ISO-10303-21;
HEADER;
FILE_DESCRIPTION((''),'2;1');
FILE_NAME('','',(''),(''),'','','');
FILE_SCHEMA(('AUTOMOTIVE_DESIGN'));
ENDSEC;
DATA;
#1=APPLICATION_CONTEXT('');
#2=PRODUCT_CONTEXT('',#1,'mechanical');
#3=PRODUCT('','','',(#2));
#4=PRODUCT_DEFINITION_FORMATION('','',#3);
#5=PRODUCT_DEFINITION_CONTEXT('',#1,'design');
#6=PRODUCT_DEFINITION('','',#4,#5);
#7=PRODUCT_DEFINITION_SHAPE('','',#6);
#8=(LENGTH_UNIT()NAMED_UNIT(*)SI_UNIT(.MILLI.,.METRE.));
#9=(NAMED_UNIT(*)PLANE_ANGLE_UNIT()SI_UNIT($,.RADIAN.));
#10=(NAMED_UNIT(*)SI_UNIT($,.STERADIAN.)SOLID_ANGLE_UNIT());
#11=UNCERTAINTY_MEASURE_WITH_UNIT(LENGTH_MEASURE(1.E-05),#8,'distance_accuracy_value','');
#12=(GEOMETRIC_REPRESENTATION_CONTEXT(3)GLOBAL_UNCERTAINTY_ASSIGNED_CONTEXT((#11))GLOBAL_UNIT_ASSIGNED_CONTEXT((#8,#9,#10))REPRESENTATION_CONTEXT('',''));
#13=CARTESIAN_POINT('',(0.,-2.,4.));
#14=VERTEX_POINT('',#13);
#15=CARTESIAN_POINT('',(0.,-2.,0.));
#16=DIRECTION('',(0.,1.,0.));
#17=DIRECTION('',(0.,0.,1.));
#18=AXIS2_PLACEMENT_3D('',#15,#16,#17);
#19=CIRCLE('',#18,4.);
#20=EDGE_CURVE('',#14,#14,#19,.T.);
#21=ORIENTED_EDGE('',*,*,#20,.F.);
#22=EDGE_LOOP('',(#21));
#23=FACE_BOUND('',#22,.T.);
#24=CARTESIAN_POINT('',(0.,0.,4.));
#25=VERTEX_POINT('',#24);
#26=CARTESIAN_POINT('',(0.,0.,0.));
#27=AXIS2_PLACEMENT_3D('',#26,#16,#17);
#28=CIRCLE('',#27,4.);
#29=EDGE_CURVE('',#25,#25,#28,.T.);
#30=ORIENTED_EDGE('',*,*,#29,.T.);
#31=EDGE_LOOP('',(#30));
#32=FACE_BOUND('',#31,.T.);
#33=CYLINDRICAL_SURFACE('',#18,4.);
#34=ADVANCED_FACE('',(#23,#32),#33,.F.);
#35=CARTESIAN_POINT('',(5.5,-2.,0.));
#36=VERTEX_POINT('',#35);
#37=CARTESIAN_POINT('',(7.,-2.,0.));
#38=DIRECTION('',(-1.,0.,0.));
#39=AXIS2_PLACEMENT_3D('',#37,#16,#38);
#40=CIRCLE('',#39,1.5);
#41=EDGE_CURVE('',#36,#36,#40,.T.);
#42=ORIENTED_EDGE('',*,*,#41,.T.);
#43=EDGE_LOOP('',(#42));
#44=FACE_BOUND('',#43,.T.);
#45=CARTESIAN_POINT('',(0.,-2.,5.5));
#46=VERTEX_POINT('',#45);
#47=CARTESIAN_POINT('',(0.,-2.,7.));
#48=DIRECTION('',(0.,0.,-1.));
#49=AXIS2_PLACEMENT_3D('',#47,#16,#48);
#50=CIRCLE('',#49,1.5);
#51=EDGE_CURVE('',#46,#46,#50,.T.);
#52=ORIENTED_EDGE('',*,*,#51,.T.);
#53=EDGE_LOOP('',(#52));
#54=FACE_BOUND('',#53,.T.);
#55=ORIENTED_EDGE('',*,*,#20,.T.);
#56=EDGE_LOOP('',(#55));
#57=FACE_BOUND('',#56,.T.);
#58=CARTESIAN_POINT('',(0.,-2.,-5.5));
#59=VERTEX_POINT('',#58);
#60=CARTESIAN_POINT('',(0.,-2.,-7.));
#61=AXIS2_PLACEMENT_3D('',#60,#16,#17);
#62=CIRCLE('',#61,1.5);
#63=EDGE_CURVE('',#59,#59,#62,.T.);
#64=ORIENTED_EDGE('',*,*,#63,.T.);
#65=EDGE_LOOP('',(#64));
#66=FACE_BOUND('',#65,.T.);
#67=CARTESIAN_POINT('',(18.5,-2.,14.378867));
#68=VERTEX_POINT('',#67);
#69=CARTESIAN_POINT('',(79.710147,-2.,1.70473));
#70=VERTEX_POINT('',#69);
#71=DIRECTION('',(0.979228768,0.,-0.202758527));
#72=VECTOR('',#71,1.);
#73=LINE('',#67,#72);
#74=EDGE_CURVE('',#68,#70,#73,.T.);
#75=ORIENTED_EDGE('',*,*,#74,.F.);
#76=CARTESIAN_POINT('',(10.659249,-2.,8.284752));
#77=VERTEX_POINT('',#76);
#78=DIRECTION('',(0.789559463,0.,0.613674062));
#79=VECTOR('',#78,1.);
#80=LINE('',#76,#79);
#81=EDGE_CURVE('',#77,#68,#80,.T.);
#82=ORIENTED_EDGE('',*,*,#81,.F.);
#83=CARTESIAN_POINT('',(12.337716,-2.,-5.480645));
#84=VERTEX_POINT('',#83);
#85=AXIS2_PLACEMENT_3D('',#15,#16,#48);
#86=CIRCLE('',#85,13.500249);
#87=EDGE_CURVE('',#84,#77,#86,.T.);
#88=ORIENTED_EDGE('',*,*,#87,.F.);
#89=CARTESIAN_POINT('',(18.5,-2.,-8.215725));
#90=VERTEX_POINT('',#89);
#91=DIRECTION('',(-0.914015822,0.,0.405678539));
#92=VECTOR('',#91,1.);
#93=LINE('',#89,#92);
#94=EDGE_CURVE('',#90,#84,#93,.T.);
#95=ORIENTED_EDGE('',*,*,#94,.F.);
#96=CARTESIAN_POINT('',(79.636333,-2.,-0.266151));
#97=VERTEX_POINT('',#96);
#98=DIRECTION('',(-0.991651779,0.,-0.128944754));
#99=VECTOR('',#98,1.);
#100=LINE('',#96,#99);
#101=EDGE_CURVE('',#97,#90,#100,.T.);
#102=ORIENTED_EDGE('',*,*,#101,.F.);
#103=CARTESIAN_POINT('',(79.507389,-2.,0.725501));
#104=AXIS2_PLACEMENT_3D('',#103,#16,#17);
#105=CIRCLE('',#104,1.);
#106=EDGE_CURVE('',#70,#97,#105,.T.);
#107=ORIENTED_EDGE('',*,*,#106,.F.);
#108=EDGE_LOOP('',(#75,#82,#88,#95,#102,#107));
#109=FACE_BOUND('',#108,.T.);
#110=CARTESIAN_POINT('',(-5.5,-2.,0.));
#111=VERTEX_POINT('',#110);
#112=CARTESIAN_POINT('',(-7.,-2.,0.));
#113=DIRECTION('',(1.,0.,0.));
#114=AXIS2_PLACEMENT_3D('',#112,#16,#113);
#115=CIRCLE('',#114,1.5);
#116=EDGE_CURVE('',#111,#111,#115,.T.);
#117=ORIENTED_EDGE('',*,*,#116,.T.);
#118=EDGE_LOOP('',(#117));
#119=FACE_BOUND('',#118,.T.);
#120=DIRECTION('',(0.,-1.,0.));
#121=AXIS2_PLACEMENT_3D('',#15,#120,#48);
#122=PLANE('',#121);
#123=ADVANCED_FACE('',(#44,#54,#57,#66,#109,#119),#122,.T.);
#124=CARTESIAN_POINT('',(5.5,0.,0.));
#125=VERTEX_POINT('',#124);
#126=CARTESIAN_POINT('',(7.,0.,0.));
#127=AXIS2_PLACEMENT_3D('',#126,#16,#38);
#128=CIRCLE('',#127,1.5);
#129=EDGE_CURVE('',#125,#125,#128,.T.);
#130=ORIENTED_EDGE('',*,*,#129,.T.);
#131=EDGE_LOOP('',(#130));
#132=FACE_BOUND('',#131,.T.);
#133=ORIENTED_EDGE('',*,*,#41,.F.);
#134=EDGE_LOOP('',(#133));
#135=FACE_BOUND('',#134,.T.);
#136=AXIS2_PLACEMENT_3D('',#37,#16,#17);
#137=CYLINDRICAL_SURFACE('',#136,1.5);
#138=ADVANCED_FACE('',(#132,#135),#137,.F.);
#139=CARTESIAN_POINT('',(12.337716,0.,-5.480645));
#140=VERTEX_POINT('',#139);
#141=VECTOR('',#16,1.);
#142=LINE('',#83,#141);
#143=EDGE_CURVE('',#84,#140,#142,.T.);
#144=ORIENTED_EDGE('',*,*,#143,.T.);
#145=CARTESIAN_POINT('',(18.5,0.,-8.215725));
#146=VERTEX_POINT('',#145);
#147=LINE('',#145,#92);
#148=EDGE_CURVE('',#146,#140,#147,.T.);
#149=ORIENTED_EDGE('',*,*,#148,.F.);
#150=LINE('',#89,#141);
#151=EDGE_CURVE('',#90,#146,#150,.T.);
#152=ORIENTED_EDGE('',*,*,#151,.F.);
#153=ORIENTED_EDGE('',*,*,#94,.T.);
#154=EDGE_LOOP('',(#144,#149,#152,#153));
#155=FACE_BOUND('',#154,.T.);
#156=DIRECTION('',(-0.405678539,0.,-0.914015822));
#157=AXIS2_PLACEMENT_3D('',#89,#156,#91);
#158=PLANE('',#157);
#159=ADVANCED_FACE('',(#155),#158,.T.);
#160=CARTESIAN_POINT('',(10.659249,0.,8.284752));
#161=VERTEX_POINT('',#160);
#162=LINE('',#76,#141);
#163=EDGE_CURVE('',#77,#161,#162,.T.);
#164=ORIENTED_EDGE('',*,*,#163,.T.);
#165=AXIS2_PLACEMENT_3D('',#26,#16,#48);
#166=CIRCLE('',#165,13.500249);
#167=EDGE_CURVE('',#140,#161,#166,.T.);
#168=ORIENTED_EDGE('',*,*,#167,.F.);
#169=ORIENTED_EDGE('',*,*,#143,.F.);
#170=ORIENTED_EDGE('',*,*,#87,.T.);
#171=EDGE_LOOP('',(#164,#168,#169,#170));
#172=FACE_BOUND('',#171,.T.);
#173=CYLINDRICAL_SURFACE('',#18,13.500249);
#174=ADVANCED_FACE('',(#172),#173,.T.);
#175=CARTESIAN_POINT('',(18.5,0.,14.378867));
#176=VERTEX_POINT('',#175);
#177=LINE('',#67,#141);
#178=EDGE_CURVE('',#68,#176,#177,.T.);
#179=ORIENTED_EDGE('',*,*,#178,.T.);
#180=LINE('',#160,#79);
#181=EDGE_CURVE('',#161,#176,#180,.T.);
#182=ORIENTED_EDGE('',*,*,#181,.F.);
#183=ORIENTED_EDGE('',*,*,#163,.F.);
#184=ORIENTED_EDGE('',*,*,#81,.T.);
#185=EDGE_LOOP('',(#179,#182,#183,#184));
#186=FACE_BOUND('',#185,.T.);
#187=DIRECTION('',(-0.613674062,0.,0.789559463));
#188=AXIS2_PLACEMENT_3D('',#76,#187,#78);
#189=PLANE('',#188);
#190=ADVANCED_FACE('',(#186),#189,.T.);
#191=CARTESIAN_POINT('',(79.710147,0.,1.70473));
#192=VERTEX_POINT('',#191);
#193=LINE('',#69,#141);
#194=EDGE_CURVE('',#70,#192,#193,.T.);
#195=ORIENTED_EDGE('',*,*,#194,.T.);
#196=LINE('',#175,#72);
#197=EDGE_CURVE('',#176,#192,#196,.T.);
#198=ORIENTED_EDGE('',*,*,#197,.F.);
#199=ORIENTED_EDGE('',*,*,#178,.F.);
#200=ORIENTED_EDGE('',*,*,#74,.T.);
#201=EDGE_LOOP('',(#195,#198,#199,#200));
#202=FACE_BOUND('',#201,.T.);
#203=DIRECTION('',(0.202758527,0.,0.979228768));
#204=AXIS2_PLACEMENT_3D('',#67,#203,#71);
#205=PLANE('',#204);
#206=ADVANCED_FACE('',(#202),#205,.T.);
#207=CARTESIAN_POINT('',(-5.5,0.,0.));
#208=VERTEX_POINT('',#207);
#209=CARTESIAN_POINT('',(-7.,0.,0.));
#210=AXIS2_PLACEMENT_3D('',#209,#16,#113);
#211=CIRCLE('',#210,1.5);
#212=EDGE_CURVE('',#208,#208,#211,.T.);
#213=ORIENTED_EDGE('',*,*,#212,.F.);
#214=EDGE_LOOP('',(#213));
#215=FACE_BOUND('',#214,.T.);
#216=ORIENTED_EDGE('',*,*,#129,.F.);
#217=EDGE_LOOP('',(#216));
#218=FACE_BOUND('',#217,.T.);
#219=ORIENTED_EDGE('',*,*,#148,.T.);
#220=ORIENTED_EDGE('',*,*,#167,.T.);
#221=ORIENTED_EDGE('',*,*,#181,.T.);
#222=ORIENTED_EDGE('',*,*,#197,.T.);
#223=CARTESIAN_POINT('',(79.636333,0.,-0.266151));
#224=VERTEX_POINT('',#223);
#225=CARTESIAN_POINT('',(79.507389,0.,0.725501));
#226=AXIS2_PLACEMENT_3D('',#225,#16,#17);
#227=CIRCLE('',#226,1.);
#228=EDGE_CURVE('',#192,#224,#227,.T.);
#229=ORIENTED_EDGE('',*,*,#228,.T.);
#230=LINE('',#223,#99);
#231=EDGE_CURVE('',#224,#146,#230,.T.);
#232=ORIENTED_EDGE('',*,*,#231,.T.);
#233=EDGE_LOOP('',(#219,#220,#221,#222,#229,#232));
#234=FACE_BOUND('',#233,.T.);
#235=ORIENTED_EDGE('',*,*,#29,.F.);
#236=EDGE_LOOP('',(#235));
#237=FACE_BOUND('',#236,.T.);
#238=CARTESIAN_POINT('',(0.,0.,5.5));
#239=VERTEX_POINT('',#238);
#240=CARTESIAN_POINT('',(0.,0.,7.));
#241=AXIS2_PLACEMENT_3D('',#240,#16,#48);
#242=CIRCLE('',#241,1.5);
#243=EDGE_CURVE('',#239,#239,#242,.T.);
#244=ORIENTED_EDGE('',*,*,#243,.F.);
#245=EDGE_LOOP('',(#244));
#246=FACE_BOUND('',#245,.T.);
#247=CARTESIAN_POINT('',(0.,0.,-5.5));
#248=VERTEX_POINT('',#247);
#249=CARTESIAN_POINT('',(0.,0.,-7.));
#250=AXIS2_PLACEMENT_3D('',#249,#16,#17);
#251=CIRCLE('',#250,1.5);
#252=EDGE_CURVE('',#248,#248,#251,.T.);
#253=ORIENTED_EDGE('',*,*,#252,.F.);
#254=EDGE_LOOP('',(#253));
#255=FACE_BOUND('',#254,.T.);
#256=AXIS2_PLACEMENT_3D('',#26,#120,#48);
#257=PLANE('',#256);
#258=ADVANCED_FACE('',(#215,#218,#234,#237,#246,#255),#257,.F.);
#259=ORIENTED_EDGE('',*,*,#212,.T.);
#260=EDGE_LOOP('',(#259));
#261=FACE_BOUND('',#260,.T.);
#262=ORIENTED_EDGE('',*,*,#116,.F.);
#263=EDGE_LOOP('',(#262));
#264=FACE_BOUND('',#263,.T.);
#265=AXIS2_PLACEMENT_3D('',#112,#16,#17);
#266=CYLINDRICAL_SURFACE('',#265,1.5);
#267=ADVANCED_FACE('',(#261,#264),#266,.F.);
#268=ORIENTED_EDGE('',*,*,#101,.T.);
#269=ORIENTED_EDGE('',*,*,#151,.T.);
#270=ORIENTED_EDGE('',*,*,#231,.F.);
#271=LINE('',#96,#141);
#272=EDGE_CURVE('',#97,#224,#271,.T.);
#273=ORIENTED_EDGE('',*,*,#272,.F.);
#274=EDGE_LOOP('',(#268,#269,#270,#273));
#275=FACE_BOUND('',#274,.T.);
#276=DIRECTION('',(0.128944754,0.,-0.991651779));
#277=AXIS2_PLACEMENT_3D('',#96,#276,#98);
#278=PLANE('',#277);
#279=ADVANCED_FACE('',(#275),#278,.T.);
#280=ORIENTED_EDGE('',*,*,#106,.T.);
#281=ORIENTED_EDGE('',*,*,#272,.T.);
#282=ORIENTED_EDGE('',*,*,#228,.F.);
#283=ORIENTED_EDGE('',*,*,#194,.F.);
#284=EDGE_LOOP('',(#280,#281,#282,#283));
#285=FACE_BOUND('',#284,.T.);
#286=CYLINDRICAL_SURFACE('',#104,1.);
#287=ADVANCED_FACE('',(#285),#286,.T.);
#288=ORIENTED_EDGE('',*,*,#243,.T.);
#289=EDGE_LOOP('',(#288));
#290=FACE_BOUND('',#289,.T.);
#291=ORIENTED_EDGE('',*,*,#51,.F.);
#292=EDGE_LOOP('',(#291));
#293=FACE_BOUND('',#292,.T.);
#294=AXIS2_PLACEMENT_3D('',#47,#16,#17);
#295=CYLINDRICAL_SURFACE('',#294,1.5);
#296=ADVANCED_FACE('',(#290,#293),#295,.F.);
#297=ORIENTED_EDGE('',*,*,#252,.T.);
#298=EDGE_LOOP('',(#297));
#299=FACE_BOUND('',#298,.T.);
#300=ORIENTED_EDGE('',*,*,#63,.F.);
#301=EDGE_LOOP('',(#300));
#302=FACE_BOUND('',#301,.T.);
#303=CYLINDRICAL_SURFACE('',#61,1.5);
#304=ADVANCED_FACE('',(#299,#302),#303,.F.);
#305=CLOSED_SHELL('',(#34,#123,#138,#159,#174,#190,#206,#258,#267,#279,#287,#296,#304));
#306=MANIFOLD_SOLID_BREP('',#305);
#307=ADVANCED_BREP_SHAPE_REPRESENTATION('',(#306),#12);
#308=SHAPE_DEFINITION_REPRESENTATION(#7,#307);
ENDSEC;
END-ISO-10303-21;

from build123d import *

# Parameters (mm, degrees)
BRIDA_BASE1_DEPTH     = 2
CROQUIS12_R           = 4
CORTAR_EXTRUIR1_DEPTH = 2
CROQUIS13_R           = 1.5
CORTAR_EXTRUIR2_DEPTH = 2
MATRIZC1_COUNT        = 4


# Sheet-metal steps are written as plain solids
with BuildPart() as part:
    # Croquis7 → Brida base1 (new body)
    with BuildSketch(Plane(origin=(0, 0, 0), x_dir=(1, 0, 0), z_dir=(0, 1, 0))):
        with BuildLine():
            Line((10.659249118, -8.284752463), (18.5, -14.378866547))
            Line((18.5, -14.378866547), (79.710147148, -1.70472983))
            ThreePointArc((79.710147148, -1.70472983), (80.506688025, -0.68807512), (79.636333375, 0.266150717))
            Line((79.636333375, 0.266150717), (18.5, 8.215724958))
            Line((18.5, 8.215724958), (12.337716326, 5.480645126))
            ThreePointArc((12.337716326, 5.480645126), (-13.400994276, 1.634034128), (10.659249118, -8.284752463))
        make_face()
    extrude(amount=-BRIDA_BASE1_DEPTH)

    # Croquis12 → Cortar-Extruir1 (cut)
    with BuildSketch(Plane(origin=(0, 0, 0), x_dir=(1, 0, 0), z_dir=(0, 1, 0))):
        with Locations(Location((0, 0, 0), (0, 0, 270))):
            Circle(CROQUIS12_R)
    extrude(amount=-CORTAR_EXTRUIR1_DEPTH, mode=Mode.SUBTRACT)

    # Croquis13 → Cortar-Extruir2 (cut)
    with BuildSketch(Plane(origin=(0, 0, 0), x_dir=(1, 0, 0), z_dir=(0, 1, 0))):
        with Locations(Location((0, 7, 0), (0, 0, 270))):
            Circle(CROQUIS13_R)
    cortar_extruir2 = extrude(amount=-CORTAR_EXTRUIR2_DEPTH, mode=Mode.SUBTRACT)

    # MatrizC1: Cortar-Extruir2 ×4 about axis
    matrizc1_axis = Axis((0, 0, 0), (0, 1, 0))
    for i in range(1, MATRIZC1_COUNT):
        add(cortar_extruir2.rotate(matrizc1_axis, i * 360 / MATRIZC1_COUNT), mode=Mode.SUBTRACT)


solid = part.part
